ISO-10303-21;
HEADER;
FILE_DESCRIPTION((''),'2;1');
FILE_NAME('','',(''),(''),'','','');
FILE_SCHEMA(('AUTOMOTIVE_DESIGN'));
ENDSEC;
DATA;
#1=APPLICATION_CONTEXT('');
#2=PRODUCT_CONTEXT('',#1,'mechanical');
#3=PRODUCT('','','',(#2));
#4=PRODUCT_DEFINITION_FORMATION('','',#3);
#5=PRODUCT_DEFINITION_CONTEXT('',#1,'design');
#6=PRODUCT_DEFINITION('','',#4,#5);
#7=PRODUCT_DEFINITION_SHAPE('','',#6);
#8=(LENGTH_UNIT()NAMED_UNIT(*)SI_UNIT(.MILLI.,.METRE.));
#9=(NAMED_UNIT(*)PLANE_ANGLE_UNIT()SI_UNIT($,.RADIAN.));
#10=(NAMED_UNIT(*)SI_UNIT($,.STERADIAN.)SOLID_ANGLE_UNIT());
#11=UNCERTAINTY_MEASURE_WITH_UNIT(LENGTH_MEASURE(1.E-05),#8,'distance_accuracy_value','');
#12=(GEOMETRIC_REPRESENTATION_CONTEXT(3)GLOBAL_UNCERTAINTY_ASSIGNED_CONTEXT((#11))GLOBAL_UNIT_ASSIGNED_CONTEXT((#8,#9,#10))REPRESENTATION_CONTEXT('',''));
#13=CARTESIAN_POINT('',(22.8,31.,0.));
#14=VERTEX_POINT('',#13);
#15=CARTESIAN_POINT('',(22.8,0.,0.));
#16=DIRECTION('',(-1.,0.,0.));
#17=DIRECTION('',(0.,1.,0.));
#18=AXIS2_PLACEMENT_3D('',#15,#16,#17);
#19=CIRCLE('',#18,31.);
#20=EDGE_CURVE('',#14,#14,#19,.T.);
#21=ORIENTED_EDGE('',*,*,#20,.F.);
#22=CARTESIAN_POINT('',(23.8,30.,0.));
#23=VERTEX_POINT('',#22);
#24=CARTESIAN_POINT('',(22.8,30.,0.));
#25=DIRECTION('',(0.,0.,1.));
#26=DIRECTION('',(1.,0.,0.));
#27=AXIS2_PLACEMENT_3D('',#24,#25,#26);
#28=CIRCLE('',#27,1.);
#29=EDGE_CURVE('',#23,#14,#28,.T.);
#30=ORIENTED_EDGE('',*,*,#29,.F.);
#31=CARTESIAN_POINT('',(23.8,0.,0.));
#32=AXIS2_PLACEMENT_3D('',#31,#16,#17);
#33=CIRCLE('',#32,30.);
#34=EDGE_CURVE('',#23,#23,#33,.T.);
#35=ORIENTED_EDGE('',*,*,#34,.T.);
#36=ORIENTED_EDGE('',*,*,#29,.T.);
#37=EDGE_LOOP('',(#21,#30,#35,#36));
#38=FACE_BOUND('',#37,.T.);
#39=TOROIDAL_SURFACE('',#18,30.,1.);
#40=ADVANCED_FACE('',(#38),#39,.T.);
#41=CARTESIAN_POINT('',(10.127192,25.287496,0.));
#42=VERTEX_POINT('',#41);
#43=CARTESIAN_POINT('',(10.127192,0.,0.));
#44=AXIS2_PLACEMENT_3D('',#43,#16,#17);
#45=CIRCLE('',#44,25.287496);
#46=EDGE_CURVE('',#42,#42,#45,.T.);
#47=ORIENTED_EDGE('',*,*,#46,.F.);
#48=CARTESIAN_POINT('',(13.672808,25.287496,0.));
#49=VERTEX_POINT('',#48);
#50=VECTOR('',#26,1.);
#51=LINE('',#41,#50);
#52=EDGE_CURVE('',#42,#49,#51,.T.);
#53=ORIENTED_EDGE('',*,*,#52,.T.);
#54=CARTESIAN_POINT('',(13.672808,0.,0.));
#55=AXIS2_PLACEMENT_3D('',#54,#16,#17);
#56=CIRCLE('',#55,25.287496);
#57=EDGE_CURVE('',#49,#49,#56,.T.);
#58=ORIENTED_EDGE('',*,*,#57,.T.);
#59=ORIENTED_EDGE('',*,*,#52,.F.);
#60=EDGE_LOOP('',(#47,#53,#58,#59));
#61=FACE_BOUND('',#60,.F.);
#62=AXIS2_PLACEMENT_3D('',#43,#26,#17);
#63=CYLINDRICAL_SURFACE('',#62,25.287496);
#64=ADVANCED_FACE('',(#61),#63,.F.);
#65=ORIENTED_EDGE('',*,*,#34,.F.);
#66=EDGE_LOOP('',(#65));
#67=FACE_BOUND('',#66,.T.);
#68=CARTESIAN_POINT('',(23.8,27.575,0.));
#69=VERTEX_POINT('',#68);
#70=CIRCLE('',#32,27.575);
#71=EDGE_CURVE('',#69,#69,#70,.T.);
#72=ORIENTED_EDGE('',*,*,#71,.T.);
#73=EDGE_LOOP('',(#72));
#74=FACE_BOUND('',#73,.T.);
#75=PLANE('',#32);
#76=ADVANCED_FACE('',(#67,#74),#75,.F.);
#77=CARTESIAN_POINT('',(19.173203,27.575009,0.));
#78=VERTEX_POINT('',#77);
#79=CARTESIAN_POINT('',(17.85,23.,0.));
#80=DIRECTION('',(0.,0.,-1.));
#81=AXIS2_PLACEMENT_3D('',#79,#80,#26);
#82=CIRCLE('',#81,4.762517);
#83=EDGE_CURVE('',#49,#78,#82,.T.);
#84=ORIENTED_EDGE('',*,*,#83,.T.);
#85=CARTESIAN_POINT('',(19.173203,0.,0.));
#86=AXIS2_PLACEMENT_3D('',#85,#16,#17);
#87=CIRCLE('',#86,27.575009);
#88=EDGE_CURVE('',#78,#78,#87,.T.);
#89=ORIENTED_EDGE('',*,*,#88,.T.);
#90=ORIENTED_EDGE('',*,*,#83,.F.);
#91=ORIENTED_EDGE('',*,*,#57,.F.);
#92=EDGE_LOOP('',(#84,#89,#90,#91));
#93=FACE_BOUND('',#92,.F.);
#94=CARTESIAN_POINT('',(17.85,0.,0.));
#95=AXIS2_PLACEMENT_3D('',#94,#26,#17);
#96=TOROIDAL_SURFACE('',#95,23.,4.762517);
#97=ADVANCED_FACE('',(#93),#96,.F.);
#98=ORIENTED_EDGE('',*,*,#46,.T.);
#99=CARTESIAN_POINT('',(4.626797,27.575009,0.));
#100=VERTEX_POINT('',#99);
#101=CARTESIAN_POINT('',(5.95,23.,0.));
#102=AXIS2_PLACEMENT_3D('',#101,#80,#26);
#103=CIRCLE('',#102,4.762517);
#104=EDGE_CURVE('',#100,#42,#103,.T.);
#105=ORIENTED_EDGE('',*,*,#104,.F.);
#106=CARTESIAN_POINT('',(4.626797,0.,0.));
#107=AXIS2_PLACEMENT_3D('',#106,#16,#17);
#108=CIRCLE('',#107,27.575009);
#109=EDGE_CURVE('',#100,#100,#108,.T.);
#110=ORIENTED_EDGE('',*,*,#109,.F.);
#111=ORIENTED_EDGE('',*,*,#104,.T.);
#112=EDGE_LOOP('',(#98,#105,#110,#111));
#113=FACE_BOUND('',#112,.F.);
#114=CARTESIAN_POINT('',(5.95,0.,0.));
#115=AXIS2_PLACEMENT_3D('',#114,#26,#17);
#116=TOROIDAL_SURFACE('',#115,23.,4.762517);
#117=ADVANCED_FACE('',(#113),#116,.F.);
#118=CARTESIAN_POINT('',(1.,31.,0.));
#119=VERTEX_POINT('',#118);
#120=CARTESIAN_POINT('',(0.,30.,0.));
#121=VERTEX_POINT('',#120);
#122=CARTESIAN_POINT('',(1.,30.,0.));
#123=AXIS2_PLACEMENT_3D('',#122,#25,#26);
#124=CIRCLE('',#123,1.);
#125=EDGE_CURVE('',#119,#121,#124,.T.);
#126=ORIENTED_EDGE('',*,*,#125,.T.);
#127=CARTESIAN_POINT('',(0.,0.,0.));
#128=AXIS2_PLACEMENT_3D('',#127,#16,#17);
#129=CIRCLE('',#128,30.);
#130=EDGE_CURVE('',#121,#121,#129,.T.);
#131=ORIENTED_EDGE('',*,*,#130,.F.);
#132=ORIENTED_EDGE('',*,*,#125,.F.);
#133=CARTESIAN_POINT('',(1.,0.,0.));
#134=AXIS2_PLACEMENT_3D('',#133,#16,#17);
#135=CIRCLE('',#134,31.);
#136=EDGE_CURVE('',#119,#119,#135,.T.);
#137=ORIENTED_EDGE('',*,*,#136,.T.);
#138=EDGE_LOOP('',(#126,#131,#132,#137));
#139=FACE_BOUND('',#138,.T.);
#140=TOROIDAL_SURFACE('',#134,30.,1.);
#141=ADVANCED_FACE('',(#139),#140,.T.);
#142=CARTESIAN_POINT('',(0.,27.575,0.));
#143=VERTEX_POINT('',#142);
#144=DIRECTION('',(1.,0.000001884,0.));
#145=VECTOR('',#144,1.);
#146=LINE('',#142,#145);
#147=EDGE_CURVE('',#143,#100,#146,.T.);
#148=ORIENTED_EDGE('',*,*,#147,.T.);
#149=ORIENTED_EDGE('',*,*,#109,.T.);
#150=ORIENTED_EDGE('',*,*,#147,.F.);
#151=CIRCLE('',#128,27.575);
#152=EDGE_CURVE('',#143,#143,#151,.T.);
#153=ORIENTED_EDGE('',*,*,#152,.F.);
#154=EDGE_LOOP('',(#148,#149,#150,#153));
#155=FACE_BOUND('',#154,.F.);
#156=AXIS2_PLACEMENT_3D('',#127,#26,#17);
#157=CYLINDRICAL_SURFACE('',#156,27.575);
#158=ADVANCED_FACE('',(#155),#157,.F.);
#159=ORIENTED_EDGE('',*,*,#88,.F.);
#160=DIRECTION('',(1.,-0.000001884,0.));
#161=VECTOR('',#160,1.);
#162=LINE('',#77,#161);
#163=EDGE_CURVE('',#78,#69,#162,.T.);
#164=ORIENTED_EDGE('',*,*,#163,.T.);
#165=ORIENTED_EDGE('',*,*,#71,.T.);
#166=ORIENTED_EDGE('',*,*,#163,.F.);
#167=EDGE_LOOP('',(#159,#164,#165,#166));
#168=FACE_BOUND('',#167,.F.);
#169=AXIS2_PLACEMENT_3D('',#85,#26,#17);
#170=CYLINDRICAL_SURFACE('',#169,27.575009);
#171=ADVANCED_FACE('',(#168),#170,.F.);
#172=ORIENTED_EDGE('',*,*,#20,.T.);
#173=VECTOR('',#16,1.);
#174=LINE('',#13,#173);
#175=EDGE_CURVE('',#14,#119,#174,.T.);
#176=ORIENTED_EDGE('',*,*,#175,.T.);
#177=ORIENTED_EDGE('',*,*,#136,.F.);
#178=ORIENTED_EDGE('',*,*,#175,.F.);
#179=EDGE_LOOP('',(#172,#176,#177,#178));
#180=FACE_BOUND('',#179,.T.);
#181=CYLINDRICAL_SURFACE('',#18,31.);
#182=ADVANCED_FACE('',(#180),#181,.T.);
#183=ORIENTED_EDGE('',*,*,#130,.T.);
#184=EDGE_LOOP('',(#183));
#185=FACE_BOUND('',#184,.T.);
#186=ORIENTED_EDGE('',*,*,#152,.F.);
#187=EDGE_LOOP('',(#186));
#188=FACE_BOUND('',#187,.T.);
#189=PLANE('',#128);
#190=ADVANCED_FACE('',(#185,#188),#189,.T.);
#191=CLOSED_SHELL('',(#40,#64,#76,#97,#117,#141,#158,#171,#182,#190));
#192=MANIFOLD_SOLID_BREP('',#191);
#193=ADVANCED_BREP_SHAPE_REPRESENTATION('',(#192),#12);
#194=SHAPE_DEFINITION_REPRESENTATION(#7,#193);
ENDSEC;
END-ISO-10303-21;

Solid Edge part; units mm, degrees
sketch "Sketch1" plane through (0, 0, 0) normal (0, 0, 1) x (1, 0, 0)
  line L0 (0, 30) -> (0, 27.575)
  line L1 (0, 27.575) -> (4.6268, 27.575)
  arc A0 (4.6268, 27.575) -> (10.1272, 25.2875) centre (5.95, 23) cw
  line L2 (10.1272, 25.2875) -> (13.6728, 25.2875)
  arc A1 (13.6728, 25.2875) -> (19.1732, 27.575) centre (17.85, 23) cw
  line L3 (19.1732, 27.575) -> (23.8, 27.575)
  line L4 (23.8, 27.575) -> (23.8, 30)
  arc A2 (23.8, 30) -> (22.8, 31) centre (22.8, 30) ccw
  line L5 (22.8, 31) -> (1, 31)
  arc A3 (1, 31) -> (0, 30) centre (1, 30) ccw
revolve "RevolvedProtrusion1" add sketch "Sketch1" angle 360 about axis through (23.8, 0, 0) along (-1, 0, 0)
properties part number "3206 A-2RS1_PART2"
